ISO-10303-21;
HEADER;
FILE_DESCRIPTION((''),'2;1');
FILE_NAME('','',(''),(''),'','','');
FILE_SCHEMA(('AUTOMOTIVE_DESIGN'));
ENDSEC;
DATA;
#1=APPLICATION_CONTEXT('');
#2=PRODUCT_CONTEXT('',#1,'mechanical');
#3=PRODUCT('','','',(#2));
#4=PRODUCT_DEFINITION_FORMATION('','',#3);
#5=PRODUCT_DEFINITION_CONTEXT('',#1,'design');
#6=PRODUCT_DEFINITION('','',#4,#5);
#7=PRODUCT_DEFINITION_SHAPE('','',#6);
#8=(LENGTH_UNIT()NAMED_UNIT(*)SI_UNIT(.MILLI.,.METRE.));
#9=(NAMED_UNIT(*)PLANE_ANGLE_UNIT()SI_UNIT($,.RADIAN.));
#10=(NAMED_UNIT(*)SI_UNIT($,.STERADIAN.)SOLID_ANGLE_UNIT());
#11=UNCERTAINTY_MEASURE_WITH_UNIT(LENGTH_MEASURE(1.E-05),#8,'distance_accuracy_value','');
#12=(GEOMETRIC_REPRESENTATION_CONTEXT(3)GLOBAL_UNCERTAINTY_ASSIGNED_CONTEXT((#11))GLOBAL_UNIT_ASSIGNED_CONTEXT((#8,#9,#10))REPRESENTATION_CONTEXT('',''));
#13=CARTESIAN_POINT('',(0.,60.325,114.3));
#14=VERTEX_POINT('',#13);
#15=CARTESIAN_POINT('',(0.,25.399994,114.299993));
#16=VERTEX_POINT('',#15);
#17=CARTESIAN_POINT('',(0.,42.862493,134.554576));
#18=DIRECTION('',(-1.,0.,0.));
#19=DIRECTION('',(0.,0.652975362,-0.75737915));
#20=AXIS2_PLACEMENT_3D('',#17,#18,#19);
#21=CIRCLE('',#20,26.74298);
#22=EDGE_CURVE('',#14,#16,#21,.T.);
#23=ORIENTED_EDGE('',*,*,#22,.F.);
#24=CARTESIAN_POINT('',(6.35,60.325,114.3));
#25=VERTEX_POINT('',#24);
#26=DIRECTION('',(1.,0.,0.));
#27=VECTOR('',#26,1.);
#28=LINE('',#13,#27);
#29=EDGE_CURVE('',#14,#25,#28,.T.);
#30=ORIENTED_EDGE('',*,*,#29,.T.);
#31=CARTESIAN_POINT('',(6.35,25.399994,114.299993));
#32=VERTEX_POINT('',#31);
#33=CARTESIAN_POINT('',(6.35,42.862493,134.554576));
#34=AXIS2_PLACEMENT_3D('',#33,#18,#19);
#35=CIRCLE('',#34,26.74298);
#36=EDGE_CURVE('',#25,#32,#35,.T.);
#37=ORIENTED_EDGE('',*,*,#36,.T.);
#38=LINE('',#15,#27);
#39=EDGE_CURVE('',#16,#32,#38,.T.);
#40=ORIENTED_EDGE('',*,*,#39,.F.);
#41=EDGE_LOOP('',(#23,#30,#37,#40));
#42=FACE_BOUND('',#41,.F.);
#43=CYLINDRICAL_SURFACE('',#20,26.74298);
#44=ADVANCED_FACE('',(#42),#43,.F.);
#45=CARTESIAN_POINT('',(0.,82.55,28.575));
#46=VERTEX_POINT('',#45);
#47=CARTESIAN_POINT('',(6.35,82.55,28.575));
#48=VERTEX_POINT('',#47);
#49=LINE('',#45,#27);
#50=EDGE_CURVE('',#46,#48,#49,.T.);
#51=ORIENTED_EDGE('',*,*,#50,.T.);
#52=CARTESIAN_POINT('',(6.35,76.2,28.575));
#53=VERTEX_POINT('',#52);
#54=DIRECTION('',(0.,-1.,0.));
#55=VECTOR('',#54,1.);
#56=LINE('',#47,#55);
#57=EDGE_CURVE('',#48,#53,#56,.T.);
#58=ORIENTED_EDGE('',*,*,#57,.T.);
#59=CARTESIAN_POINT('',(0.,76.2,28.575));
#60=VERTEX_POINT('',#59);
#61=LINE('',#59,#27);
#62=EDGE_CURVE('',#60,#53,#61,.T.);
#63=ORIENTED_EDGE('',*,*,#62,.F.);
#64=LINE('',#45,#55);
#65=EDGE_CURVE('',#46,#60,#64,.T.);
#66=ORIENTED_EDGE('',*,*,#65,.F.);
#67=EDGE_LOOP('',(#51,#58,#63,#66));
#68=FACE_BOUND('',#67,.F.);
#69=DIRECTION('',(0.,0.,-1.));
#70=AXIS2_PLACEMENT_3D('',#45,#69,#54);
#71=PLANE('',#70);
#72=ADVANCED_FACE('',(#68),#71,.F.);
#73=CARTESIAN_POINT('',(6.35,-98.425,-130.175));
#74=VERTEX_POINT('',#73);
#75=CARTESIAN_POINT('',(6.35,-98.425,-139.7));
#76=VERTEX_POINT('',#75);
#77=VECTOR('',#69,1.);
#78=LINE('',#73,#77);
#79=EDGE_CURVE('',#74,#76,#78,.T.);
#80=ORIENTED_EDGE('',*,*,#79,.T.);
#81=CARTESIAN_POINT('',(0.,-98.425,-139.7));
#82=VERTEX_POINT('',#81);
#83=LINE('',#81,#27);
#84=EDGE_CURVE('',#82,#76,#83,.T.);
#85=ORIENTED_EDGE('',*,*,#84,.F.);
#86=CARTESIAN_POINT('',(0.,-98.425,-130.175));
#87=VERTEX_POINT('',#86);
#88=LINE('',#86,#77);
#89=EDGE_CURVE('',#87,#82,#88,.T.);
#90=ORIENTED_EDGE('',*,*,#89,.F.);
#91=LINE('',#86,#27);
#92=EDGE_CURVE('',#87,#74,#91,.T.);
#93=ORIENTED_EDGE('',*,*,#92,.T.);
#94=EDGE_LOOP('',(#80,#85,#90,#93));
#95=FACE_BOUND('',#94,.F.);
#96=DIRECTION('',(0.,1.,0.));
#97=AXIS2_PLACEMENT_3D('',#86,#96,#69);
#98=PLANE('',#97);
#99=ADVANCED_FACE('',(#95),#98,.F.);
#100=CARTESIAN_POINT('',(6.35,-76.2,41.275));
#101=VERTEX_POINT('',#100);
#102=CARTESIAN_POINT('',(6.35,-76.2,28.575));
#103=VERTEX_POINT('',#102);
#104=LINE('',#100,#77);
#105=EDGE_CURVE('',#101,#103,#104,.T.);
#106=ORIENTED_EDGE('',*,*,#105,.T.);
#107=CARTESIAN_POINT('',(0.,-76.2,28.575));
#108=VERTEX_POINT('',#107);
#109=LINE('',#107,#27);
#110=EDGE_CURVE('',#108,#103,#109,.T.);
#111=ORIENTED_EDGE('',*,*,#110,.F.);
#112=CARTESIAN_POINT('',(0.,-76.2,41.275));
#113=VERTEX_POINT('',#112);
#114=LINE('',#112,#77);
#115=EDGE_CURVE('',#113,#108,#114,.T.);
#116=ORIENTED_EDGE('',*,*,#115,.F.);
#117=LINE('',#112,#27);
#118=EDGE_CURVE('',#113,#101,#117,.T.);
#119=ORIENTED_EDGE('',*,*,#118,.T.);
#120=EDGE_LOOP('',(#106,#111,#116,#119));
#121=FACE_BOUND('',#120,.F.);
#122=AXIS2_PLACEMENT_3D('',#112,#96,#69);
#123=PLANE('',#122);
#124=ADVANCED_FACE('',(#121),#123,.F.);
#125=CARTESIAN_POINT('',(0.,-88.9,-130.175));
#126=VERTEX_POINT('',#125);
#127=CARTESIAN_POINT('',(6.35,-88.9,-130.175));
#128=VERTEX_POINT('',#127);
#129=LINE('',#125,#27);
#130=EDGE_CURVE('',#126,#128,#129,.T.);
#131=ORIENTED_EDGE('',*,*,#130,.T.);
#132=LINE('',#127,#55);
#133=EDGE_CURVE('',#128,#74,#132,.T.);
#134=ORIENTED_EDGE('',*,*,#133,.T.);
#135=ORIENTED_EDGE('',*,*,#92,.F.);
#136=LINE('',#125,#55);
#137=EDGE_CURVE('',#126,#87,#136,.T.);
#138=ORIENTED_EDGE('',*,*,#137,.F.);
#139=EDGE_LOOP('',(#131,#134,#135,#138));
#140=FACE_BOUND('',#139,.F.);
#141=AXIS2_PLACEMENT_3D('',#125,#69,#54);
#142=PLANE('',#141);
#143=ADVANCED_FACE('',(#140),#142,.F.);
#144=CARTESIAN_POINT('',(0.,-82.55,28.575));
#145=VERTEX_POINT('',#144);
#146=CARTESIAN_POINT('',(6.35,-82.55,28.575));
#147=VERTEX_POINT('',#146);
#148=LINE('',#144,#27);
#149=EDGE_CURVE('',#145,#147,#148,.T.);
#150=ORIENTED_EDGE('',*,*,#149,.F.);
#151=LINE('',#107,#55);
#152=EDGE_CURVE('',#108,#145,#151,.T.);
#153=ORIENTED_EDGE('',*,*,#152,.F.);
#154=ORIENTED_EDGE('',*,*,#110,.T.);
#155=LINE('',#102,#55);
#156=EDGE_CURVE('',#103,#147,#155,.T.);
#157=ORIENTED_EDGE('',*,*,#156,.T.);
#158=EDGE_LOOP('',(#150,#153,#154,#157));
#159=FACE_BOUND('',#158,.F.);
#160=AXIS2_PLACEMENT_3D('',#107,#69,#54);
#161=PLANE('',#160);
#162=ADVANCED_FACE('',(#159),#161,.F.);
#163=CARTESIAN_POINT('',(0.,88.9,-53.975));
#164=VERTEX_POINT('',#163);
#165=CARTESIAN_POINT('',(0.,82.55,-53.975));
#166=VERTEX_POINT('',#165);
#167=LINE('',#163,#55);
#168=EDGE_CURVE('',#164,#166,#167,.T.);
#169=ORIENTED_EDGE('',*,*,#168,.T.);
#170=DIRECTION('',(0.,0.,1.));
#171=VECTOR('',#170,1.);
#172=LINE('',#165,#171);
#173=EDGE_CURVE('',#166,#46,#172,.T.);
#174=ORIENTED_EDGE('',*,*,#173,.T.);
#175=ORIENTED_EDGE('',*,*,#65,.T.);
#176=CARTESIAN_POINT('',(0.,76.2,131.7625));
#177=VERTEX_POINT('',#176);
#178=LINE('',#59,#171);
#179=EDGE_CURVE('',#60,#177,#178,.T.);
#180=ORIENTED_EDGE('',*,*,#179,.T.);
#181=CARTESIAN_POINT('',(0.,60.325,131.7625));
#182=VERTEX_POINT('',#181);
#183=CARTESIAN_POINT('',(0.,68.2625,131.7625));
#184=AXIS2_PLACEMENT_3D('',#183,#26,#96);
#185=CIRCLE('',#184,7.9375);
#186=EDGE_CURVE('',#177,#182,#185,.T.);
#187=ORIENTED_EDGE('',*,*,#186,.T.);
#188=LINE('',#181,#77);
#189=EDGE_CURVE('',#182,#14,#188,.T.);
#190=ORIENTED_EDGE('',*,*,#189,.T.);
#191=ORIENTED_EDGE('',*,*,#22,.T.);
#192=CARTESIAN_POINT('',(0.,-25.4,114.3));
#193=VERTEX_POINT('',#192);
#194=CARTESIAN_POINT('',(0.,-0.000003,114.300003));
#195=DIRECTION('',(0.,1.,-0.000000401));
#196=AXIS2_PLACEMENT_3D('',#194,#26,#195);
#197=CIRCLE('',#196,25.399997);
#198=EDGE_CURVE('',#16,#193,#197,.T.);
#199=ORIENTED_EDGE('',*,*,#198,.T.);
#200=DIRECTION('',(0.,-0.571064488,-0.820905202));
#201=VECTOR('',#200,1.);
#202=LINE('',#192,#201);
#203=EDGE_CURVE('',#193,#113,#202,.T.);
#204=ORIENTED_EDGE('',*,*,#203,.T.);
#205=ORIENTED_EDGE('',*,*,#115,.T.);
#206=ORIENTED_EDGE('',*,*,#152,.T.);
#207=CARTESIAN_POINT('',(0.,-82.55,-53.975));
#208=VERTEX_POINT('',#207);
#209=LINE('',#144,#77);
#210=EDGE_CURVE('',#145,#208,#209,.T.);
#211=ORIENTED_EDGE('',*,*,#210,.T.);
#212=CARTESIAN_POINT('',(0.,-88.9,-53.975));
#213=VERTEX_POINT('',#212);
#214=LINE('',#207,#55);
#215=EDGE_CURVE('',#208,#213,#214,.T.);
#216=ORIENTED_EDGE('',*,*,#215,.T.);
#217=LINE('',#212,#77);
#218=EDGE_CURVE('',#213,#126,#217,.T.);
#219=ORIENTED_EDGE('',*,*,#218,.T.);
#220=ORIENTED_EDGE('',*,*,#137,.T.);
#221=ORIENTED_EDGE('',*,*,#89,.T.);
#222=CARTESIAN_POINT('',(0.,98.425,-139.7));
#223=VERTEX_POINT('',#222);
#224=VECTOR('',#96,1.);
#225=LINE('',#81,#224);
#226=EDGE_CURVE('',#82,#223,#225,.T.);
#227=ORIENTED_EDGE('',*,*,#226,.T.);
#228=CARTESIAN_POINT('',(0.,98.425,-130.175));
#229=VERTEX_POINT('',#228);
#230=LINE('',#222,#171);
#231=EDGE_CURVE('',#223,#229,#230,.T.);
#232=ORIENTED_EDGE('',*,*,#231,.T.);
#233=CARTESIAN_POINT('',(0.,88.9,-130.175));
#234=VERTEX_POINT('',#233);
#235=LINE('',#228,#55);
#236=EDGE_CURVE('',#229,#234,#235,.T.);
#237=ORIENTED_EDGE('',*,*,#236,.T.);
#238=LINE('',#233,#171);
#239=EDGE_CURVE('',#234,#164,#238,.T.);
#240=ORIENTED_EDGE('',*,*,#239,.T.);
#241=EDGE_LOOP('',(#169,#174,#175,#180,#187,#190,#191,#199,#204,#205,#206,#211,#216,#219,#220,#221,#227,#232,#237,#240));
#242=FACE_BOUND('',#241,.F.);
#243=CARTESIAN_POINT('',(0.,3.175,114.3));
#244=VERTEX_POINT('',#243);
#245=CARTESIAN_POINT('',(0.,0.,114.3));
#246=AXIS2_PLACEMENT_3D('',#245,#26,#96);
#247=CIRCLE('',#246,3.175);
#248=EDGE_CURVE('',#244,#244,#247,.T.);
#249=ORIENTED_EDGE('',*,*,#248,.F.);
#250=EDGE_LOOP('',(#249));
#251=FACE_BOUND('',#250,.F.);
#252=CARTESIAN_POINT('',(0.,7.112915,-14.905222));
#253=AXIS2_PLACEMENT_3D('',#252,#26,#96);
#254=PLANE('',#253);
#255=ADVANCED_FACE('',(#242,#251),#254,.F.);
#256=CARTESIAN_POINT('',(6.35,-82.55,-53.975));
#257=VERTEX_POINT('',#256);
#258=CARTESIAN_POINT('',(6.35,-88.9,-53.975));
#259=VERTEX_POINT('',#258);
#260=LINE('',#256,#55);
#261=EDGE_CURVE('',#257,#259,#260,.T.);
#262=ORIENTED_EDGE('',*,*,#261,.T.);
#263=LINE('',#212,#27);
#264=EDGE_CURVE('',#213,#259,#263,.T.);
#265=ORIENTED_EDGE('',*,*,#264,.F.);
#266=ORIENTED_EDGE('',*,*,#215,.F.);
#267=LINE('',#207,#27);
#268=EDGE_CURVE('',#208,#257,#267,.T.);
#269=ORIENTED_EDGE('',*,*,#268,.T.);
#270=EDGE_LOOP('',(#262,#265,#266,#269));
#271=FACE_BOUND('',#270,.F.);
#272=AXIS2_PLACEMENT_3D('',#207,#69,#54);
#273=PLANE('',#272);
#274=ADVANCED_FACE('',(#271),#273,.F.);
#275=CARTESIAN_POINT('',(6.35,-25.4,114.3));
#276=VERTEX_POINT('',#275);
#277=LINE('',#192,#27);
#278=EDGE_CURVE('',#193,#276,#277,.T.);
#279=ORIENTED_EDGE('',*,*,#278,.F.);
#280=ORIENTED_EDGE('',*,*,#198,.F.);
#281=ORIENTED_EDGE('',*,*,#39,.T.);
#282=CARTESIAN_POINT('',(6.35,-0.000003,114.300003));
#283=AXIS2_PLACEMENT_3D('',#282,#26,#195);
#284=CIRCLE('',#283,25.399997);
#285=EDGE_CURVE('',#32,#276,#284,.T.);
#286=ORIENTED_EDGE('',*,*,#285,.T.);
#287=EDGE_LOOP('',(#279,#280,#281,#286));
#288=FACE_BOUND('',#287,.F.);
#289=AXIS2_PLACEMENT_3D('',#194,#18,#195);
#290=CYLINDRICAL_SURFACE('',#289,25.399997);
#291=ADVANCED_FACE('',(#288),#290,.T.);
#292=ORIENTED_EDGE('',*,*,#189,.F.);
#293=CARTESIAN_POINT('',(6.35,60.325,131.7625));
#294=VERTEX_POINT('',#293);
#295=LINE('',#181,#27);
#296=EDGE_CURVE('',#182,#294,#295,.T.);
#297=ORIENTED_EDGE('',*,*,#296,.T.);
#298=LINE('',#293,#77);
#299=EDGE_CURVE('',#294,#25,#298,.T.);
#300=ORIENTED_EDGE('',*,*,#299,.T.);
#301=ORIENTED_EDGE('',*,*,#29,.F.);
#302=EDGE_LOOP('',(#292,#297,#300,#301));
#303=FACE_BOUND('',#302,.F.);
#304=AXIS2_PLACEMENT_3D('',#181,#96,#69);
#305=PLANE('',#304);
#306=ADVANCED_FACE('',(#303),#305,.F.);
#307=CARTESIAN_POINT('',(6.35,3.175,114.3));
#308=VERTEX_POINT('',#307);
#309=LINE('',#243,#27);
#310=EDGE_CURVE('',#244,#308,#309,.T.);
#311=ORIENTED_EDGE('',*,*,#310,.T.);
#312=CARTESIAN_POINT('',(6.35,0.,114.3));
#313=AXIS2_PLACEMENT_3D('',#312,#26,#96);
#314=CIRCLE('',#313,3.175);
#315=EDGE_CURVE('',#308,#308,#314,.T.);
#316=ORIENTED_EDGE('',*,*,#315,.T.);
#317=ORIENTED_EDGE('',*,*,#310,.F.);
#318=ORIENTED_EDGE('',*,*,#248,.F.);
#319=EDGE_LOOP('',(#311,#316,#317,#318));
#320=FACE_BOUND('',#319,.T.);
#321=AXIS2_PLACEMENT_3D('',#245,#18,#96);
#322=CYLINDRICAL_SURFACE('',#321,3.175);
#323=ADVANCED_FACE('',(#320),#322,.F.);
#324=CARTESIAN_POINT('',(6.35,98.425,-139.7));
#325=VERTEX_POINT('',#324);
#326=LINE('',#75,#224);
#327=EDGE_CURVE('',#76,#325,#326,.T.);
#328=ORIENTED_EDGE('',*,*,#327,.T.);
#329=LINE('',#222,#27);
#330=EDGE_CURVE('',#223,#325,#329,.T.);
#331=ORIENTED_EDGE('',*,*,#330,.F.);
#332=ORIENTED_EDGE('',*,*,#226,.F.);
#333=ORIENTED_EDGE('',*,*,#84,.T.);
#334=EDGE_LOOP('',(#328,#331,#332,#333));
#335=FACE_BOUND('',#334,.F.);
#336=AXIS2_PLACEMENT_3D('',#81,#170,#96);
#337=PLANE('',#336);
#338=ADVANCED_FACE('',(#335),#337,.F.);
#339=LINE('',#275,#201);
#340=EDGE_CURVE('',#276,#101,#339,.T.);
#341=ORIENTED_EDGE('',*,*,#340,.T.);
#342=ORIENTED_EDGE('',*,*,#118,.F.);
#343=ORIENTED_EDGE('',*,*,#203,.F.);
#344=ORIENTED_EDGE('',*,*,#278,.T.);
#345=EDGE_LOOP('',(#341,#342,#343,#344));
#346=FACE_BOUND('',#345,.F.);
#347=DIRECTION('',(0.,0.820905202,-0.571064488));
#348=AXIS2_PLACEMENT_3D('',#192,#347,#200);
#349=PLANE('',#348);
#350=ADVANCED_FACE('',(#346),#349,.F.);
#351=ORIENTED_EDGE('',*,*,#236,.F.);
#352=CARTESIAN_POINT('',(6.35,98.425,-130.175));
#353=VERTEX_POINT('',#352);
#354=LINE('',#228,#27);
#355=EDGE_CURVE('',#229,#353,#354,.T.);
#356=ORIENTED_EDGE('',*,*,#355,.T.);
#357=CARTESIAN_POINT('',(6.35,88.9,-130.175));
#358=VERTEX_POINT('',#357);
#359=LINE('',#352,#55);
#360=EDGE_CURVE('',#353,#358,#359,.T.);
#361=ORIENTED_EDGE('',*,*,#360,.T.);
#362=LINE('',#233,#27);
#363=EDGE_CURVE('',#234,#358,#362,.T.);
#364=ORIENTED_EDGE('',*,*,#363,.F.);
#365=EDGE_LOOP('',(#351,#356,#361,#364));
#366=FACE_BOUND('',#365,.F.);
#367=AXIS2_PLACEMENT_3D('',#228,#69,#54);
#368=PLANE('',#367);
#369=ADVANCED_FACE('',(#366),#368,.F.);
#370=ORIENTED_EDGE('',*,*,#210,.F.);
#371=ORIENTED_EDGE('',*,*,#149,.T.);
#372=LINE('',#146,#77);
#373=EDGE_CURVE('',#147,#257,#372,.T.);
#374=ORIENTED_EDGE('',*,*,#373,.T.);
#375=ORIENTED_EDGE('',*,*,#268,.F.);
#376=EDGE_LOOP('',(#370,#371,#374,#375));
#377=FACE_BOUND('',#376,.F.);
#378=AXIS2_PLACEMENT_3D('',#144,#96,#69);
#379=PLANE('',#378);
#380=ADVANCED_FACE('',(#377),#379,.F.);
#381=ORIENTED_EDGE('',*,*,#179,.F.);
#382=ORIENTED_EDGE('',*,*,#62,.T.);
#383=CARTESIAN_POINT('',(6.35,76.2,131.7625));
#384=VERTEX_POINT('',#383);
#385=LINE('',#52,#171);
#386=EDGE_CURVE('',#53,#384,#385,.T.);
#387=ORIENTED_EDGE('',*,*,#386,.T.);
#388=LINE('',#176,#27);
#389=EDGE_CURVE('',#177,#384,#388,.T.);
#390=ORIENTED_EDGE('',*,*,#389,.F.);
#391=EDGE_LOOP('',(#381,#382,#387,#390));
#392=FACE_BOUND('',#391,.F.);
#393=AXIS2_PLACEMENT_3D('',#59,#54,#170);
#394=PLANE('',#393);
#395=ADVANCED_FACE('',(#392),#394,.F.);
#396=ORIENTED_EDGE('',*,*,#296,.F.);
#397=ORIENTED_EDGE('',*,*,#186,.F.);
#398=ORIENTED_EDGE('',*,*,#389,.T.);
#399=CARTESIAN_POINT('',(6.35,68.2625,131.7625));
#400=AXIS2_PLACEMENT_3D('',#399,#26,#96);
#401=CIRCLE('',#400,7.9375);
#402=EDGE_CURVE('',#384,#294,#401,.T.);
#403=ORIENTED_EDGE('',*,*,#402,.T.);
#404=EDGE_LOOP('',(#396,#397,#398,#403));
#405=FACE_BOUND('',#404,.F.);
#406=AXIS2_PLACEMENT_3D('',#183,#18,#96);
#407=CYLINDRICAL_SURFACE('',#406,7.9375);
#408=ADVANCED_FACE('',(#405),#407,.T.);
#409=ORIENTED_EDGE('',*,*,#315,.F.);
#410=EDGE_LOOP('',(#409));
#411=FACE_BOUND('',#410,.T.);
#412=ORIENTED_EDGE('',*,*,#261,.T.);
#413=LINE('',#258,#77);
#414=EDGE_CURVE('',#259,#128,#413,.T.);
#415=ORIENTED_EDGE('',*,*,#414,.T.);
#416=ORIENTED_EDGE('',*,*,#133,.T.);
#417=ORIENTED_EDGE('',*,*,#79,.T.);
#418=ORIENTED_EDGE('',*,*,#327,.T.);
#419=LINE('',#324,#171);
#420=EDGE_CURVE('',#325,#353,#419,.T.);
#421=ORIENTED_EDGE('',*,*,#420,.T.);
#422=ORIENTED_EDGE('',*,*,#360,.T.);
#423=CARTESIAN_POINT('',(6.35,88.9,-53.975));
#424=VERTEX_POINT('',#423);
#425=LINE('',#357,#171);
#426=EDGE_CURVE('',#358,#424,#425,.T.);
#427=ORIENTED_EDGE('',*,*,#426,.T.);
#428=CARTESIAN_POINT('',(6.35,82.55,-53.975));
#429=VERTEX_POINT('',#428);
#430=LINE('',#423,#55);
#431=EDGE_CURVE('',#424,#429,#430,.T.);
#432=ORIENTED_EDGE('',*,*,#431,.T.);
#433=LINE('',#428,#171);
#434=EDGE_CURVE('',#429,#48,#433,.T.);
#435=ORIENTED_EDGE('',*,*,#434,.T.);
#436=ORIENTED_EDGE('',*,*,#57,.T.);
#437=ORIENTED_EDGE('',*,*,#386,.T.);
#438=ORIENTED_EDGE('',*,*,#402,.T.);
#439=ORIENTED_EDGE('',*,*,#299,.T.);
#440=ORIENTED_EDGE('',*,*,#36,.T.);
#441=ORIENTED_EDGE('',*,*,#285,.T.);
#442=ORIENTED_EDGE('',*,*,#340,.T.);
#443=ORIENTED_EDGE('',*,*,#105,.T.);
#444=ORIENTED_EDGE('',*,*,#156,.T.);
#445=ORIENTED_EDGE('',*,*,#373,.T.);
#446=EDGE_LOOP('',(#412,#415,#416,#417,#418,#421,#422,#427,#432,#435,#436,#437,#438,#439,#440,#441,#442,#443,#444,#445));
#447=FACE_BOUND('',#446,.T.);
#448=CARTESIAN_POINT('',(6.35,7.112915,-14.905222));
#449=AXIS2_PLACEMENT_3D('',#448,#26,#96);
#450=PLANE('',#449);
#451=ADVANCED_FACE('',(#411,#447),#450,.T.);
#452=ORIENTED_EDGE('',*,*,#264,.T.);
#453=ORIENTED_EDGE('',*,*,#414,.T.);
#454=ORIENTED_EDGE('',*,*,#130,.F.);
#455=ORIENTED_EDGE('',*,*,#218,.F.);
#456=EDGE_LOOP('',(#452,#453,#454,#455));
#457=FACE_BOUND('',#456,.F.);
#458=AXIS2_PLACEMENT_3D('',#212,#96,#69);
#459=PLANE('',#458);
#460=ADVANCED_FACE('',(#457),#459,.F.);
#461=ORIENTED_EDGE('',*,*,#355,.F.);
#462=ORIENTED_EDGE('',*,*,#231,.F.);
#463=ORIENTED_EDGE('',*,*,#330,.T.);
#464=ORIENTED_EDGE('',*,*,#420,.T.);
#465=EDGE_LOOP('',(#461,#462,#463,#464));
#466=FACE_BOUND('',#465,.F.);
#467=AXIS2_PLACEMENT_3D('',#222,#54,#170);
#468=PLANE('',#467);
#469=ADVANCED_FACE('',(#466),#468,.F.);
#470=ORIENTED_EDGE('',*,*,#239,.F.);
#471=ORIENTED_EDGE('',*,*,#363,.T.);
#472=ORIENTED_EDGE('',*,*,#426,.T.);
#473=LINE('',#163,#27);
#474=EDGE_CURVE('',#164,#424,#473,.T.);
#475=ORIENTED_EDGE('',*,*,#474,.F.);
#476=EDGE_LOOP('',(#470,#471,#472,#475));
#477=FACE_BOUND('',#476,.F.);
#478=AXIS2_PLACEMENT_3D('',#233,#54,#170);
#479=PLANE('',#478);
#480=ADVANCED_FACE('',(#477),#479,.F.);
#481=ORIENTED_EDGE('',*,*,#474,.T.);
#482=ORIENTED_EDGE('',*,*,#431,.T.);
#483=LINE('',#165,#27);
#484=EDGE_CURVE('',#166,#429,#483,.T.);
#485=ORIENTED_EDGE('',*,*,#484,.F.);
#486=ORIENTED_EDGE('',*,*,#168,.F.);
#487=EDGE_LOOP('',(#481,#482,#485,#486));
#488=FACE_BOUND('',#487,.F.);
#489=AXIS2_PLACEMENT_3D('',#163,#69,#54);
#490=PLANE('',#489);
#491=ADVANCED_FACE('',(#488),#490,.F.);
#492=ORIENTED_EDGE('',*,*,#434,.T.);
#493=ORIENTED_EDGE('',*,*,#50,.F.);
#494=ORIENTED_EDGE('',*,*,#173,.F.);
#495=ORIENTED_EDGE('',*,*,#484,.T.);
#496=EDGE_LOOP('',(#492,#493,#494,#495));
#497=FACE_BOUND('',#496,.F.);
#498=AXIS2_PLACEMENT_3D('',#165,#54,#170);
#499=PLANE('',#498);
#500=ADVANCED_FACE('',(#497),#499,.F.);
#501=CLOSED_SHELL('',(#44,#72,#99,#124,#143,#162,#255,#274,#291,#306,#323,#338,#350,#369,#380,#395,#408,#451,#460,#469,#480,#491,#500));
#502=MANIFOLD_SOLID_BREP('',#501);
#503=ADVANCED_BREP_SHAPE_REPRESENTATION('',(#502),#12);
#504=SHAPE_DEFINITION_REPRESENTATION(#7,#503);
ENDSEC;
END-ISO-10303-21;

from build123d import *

# Parameters (mm, degrees)
F0_R     = 3.175
F1_DEPTH = 6.35


# Not quite as in the source:
# - ends of sketch curves that miss each other by under 0.0002 mm in the source are joined


with BuildPart() as f1:
    # F0 (on Right) → F1 (new body)
    with BuildSketch(Plane.YZ):
        with BuildLine():
            Line((-88.9, -53.975), (-88.9, -130.175))
            Line((-88.9, -130.175), (-98.425, -130.175))
            Line((-98.425, -130.175), (-98.425, -139.7))
            Line((-98.425, -139.7), (98.425, -139.7))
            Line((98.425, -139.7), (98.425, -130.175))
            Line((98.425, -130.175), (88.9, -130.175))
            Line((88.9, -130.175), (88.9, -53.975))
            Line((88.9, -53.975), (82.55, -53.975))
            Line((82.55, -53.975), (82.55, 28.575))
            Line((82.55, 28.575), (76.2, 28.575))
            Line((76.2, 28.575), (76.2, 34.925))
            Line((76.2, 34.925), (76.2, 131.7625))
            ThreePointArc((76.2, 131.7625), (68.2625, 139.7), (60.325, 131.7625))
            Line((60.325, 131.7625), (60.325, 114.3))
            ThreePointArc((60.325, 114.3), (42.8625, 107.8115954), (25.3999938624, 114.299992881))
            ThreePointArc((25.3999938624, 114.299992881), (0, 139.7), (-25.4, 114.3))
            Line((-25.4, 114.3), (-76.2, 41.275))
            Line((-76.2, 41.275), (-76.2, 28.575))
            Line((-76.2, 28.575), (-82.55, 28.575))
            Line((-82.55, 28.575), (-82.55, -53.975))
            Line((-82.55, -53.975), (-88.9, -53.975))
        make_face()
        with Locations((0, 114.3)):
            Circle(F0_R, mode=Mode.SUBTRACT)
    extrude(amount=F1_DEPTH)


solid = f1.part
